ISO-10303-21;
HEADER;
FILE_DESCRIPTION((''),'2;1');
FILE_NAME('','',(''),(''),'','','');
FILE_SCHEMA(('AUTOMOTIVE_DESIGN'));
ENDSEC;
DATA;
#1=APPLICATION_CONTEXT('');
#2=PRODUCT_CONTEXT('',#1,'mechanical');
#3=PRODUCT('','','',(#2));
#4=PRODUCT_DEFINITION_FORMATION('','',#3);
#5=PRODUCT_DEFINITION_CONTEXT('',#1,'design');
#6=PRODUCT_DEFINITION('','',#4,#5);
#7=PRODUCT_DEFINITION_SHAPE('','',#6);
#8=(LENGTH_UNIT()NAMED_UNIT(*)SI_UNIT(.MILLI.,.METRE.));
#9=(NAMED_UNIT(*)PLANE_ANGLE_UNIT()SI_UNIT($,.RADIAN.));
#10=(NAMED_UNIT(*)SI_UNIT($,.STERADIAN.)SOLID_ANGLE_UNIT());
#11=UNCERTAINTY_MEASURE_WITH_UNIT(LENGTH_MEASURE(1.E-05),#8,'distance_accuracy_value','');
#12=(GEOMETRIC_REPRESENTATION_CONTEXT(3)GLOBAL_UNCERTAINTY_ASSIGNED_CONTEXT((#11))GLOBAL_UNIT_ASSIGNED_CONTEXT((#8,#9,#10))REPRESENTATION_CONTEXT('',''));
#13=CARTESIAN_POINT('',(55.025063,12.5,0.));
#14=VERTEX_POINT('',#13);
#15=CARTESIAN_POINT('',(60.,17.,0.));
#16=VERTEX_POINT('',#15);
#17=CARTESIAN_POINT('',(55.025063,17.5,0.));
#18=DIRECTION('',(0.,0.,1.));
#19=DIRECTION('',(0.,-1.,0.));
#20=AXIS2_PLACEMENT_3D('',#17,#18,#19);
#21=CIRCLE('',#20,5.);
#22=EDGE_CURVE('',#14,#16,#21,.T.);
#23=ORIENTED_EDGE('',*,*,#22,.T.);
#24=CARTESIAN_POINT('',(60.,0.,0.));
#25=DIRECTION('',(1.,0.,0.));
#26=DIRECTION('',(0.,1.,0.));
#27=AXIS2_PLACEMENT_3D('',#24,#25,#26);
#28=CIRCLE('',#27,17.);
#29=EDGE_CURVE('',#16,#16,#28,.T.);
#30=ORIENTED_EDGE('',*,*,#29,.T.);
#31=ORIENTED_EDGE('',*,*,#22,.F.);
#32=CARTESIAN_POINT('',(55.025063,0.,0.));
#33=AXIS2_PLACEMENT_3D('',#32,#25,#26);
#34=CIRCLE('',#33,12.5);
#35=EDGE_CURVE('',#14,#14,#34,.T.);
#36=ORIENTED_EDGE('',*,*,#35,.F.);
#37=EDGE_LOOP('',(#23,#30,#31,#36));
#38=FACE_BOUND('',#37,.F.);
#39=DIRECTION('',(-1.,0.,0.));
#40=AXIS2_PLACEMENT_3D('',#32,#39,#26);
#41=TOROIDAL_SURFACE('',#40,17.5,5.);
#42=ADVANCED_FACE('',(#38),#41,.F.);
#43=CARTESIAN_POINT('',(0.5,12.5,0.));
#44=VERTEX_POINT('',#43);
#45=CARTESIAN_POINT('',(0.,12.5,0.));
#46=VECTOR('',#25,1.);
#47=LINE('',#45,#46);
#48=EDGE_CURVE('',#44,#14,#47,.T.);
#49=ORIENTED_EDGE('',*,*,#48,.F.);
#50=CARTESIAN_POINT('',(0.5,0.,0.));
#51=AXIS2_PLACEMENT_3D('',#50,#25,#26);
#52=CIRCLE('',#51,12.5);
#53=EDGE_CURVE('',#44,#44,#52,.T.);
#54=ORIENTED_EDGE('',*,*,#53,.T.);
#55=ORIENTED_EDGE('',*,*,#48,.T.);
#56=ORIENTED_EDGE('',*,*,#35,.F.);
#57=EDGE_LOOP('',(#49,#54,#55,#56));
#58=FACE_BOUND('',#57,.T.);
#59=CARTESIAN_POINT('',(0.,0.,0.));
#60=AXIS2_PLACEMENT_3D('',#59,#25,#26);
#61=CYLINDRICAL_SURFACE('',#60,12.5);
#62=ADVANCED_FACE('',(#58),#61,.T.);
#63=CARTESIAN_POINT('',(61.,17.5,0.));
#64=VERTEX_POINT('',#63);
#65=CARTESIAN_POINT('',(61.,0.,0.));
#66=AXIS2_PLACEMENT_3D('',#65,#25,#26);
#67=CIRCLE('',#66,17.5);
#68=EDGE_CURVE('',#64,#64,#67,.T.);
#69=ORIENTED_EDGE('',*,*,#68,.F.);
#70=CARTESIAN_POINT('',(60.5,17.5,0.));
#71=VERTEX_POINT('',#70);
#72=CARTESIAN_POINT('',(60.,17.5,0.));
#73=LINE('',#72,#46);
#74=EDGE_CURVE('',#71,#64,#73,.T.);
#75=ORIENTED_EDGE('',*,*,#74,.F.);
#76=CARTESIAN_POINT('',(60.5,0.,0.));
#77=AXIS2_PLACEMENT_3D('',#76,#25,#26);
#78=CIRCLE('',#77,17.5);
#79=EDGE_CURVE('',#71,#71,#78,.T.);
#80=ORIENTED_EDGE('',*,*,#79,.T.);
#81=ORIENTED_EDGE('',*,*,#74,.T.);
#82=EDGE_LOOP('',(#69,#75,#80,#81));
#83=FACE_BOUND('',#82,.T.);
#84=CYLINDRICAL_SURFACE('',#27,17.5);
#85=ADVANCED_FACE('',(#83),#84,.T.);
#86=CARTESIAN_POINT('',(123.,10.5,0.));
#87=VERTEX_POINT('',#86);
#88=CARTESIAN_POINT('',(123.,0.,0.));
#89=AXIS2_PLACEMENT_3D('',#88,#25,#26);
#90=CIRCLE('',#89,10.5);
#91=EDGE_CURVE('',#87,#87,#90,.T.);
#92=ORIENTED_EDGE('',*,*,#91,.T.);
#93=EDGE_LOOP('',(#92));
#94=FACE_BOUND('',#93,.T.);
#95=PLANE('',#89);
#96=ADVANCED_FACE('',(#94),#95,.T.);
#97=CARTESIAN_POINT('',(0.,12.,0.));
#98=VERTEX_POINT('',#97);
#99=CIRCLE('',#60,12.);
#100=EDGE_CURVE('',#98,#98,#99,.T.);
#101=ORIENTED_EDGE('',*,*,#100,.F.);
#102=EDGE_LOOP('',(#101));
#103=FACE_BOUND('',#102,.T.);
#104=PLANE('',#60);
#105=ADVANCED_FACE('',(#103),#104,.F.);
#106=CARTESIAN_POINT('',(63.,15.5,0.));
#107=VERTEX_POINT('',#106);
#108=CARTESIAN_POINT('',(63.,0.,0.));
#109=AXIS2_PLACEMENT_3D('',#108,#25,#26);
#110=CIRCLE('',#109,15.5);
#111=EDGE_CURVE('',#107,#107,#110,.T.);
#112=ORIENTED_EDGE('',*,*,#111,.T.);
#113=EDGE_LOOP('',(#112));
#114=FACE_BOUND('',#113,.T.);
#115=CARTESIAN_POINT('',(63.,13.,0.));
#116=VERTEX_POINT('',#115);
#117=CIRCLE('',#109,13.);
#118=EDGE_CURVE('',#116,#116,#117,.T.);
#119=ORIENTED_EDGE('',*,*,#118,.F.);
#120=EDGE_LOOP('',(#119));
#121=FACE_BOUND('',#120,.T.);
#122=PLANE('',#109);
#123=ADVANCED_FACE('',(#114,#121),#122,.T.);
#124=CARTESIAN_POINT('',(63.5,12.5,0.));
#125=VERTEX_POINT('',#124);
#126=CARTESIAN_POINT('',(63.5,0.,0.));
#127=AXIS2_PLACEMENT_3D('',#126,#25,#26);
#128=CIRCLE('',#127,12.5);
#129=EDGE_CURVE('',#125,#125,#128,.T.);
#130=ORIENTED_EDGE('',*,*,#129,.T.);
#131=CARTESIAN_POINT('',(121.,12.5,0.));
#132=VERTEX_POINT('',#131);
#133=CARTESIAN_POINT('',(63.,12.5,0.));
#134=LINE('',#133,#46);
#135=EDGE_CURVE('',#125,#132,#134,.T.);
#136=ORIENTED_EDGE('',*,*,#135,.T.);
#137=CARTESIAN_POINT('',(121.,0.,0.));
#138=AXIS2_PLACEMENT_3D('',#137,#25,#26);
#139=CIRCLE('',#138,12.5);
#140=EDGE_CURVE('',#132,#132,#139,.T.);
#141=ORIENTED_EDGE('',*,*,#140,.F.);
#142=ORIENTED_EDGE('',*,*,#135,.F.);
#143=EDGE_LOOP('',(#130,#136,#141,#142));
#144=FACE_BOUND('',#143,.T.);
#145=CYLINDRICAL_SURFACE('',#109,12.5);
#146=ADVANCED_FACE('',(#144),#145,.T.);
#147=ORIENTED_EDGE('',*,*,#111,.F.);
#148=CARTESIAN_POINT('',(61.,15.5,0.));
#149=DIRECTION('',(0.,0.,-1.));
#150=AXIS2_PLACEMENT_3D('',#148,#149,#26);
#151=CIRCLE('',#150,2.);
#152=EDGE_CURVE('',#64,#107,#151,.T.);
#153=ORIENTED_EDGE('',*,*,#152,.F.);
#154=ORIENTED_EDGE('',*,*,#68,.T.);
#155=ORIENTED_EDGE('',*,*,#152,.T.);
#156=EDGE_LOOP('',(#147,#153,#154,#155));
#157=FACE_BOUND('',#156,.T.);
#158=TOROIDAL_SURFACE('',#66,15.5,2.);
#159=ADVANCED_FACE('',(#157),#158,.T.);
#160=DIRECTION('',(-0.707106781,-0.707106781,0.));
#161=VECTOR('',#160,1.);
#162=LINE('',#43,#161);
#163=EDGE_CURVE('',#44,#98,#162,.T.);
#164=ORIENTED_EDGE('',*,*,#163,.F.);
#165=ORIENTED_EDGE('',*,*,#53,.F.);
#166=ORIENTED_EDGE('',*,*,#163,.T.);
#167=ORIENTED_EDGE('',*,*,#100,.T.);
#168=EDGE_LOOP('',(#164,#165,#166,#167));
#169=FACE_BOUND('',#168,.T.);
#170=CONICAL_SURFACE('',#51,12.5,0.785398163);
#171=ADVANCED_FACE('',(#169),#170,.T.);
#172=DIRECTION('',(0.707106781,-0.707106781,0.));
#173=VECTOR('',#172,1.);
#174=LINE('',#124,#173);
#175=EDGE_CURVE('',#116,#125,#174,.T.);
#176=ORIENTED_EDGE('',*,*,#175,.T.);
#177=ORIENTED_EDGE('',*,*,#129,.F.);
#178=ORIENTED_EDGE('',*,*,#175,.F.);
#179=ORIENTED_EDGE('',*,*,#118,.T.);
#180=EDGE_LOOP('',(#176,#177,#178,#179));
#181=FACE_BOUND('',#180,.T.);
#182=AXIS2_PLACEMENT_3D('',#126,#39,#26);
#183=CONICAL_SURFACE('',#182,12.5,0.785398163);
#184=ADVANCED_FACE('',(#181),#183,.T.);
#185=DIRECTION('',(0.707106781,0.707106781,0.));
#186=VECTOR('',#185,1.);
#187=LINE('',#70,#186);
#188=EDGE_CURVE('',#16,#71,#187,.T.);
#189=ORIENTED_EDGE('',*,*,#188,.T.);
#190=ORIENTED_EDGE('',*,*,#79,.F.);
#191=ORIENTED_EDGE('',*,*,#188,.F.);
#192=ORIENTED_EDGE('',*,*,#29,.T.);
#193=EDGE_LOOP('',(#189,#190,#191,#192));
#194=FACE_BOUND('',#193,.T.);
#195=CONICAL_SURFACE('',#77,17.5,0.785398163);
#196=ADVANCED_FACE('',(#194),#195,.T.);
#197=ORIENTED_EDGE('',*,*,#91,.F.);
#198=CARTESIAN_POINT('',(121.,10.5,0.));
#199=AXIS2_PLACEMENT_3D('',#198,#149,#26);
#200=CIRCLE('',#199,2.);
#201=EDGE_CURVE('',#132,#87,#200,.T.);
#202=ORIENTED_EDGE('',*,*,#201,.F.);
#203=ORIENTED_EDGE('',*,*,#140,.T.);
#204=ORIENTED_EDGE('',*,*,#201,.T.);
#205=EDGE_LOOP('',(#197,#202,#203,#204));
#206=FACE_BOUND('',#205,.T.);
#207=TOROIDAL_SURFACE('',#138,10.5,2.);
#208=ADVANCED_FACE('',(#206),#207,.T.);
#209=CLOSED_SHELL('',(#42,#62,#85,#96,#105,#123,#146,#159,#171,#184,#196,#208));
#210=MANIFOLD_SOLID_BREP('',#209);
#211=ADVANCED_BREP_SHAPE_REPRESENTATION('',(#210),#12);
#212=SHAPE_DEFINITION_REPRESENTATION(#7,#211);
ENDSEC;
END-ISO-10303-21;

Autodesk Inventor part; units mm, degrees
ref_plane "Start Plane" through (0, 0, 0) normal (1, 0, 0) x (0, 1, 0)
ref_plane "XZ Plane" through (0, 0, 0) normal (0, 1, 0) x (-1, 0, 0)
ref_plane "XY Plane" through (0, 0, 0) normal (0, 0, 1) x (1, 0, 0)
sketch "Main Sketch" plane through (0, 0, 0) normal (0, 0, 1) x (1, 0, 0)
  line L0 (0, 0) -> (123, 0)
  line L1 (0, 0) -> (0, 12.5)
  line L2 (0, 12.5) -> (60, 12.5)
  line L3 (60, 12.5) -> (60, 17.5)
  line L4 (63, 17.5) -> (63, 12.5)
  line L5 (60, 17.5) -> (63, 17.5)
  line L6 (123, 12.5) -> (123, 0)
  line L7 (63, 12.5) -> (123, 12.5)
  dimension "d3" = 25
  dimension "d4" = 35
  dimension "d5" = 25
revolve "Revolution1" add sketch "Main Sketch" angle 360 about axis through (0, 0, 0) along (1, 0, 0)
chamfer "Chamfer3" distance 0.5 angle 45 1 edges at (60, -17.5, 0) measured on face at (62, 17.4433, -1.4082)
fillet "Fillet2" radius 2 1 edges at (63, -17.5, 0)
chamfer "Chamfer4" distance 0.5 angle 45 1 edges at (63, -12.5, 0) measured on face at (103, 12.4595, -1.0058)
fillet "Fillet3" radius 2 1 edges at (123, -12.5, 0)
chamfer "Chamfer1" distance 0.5 angle 45 1 edges at (0, -12.5, 0) measured on face at (40, 12.4595, -1.0058)
fillet "Fillet1" radius 5 1 edges at (60, -12.5, 0)
equation "\"Length\" = 123"
properties part number "Shaft" material "Steel"
